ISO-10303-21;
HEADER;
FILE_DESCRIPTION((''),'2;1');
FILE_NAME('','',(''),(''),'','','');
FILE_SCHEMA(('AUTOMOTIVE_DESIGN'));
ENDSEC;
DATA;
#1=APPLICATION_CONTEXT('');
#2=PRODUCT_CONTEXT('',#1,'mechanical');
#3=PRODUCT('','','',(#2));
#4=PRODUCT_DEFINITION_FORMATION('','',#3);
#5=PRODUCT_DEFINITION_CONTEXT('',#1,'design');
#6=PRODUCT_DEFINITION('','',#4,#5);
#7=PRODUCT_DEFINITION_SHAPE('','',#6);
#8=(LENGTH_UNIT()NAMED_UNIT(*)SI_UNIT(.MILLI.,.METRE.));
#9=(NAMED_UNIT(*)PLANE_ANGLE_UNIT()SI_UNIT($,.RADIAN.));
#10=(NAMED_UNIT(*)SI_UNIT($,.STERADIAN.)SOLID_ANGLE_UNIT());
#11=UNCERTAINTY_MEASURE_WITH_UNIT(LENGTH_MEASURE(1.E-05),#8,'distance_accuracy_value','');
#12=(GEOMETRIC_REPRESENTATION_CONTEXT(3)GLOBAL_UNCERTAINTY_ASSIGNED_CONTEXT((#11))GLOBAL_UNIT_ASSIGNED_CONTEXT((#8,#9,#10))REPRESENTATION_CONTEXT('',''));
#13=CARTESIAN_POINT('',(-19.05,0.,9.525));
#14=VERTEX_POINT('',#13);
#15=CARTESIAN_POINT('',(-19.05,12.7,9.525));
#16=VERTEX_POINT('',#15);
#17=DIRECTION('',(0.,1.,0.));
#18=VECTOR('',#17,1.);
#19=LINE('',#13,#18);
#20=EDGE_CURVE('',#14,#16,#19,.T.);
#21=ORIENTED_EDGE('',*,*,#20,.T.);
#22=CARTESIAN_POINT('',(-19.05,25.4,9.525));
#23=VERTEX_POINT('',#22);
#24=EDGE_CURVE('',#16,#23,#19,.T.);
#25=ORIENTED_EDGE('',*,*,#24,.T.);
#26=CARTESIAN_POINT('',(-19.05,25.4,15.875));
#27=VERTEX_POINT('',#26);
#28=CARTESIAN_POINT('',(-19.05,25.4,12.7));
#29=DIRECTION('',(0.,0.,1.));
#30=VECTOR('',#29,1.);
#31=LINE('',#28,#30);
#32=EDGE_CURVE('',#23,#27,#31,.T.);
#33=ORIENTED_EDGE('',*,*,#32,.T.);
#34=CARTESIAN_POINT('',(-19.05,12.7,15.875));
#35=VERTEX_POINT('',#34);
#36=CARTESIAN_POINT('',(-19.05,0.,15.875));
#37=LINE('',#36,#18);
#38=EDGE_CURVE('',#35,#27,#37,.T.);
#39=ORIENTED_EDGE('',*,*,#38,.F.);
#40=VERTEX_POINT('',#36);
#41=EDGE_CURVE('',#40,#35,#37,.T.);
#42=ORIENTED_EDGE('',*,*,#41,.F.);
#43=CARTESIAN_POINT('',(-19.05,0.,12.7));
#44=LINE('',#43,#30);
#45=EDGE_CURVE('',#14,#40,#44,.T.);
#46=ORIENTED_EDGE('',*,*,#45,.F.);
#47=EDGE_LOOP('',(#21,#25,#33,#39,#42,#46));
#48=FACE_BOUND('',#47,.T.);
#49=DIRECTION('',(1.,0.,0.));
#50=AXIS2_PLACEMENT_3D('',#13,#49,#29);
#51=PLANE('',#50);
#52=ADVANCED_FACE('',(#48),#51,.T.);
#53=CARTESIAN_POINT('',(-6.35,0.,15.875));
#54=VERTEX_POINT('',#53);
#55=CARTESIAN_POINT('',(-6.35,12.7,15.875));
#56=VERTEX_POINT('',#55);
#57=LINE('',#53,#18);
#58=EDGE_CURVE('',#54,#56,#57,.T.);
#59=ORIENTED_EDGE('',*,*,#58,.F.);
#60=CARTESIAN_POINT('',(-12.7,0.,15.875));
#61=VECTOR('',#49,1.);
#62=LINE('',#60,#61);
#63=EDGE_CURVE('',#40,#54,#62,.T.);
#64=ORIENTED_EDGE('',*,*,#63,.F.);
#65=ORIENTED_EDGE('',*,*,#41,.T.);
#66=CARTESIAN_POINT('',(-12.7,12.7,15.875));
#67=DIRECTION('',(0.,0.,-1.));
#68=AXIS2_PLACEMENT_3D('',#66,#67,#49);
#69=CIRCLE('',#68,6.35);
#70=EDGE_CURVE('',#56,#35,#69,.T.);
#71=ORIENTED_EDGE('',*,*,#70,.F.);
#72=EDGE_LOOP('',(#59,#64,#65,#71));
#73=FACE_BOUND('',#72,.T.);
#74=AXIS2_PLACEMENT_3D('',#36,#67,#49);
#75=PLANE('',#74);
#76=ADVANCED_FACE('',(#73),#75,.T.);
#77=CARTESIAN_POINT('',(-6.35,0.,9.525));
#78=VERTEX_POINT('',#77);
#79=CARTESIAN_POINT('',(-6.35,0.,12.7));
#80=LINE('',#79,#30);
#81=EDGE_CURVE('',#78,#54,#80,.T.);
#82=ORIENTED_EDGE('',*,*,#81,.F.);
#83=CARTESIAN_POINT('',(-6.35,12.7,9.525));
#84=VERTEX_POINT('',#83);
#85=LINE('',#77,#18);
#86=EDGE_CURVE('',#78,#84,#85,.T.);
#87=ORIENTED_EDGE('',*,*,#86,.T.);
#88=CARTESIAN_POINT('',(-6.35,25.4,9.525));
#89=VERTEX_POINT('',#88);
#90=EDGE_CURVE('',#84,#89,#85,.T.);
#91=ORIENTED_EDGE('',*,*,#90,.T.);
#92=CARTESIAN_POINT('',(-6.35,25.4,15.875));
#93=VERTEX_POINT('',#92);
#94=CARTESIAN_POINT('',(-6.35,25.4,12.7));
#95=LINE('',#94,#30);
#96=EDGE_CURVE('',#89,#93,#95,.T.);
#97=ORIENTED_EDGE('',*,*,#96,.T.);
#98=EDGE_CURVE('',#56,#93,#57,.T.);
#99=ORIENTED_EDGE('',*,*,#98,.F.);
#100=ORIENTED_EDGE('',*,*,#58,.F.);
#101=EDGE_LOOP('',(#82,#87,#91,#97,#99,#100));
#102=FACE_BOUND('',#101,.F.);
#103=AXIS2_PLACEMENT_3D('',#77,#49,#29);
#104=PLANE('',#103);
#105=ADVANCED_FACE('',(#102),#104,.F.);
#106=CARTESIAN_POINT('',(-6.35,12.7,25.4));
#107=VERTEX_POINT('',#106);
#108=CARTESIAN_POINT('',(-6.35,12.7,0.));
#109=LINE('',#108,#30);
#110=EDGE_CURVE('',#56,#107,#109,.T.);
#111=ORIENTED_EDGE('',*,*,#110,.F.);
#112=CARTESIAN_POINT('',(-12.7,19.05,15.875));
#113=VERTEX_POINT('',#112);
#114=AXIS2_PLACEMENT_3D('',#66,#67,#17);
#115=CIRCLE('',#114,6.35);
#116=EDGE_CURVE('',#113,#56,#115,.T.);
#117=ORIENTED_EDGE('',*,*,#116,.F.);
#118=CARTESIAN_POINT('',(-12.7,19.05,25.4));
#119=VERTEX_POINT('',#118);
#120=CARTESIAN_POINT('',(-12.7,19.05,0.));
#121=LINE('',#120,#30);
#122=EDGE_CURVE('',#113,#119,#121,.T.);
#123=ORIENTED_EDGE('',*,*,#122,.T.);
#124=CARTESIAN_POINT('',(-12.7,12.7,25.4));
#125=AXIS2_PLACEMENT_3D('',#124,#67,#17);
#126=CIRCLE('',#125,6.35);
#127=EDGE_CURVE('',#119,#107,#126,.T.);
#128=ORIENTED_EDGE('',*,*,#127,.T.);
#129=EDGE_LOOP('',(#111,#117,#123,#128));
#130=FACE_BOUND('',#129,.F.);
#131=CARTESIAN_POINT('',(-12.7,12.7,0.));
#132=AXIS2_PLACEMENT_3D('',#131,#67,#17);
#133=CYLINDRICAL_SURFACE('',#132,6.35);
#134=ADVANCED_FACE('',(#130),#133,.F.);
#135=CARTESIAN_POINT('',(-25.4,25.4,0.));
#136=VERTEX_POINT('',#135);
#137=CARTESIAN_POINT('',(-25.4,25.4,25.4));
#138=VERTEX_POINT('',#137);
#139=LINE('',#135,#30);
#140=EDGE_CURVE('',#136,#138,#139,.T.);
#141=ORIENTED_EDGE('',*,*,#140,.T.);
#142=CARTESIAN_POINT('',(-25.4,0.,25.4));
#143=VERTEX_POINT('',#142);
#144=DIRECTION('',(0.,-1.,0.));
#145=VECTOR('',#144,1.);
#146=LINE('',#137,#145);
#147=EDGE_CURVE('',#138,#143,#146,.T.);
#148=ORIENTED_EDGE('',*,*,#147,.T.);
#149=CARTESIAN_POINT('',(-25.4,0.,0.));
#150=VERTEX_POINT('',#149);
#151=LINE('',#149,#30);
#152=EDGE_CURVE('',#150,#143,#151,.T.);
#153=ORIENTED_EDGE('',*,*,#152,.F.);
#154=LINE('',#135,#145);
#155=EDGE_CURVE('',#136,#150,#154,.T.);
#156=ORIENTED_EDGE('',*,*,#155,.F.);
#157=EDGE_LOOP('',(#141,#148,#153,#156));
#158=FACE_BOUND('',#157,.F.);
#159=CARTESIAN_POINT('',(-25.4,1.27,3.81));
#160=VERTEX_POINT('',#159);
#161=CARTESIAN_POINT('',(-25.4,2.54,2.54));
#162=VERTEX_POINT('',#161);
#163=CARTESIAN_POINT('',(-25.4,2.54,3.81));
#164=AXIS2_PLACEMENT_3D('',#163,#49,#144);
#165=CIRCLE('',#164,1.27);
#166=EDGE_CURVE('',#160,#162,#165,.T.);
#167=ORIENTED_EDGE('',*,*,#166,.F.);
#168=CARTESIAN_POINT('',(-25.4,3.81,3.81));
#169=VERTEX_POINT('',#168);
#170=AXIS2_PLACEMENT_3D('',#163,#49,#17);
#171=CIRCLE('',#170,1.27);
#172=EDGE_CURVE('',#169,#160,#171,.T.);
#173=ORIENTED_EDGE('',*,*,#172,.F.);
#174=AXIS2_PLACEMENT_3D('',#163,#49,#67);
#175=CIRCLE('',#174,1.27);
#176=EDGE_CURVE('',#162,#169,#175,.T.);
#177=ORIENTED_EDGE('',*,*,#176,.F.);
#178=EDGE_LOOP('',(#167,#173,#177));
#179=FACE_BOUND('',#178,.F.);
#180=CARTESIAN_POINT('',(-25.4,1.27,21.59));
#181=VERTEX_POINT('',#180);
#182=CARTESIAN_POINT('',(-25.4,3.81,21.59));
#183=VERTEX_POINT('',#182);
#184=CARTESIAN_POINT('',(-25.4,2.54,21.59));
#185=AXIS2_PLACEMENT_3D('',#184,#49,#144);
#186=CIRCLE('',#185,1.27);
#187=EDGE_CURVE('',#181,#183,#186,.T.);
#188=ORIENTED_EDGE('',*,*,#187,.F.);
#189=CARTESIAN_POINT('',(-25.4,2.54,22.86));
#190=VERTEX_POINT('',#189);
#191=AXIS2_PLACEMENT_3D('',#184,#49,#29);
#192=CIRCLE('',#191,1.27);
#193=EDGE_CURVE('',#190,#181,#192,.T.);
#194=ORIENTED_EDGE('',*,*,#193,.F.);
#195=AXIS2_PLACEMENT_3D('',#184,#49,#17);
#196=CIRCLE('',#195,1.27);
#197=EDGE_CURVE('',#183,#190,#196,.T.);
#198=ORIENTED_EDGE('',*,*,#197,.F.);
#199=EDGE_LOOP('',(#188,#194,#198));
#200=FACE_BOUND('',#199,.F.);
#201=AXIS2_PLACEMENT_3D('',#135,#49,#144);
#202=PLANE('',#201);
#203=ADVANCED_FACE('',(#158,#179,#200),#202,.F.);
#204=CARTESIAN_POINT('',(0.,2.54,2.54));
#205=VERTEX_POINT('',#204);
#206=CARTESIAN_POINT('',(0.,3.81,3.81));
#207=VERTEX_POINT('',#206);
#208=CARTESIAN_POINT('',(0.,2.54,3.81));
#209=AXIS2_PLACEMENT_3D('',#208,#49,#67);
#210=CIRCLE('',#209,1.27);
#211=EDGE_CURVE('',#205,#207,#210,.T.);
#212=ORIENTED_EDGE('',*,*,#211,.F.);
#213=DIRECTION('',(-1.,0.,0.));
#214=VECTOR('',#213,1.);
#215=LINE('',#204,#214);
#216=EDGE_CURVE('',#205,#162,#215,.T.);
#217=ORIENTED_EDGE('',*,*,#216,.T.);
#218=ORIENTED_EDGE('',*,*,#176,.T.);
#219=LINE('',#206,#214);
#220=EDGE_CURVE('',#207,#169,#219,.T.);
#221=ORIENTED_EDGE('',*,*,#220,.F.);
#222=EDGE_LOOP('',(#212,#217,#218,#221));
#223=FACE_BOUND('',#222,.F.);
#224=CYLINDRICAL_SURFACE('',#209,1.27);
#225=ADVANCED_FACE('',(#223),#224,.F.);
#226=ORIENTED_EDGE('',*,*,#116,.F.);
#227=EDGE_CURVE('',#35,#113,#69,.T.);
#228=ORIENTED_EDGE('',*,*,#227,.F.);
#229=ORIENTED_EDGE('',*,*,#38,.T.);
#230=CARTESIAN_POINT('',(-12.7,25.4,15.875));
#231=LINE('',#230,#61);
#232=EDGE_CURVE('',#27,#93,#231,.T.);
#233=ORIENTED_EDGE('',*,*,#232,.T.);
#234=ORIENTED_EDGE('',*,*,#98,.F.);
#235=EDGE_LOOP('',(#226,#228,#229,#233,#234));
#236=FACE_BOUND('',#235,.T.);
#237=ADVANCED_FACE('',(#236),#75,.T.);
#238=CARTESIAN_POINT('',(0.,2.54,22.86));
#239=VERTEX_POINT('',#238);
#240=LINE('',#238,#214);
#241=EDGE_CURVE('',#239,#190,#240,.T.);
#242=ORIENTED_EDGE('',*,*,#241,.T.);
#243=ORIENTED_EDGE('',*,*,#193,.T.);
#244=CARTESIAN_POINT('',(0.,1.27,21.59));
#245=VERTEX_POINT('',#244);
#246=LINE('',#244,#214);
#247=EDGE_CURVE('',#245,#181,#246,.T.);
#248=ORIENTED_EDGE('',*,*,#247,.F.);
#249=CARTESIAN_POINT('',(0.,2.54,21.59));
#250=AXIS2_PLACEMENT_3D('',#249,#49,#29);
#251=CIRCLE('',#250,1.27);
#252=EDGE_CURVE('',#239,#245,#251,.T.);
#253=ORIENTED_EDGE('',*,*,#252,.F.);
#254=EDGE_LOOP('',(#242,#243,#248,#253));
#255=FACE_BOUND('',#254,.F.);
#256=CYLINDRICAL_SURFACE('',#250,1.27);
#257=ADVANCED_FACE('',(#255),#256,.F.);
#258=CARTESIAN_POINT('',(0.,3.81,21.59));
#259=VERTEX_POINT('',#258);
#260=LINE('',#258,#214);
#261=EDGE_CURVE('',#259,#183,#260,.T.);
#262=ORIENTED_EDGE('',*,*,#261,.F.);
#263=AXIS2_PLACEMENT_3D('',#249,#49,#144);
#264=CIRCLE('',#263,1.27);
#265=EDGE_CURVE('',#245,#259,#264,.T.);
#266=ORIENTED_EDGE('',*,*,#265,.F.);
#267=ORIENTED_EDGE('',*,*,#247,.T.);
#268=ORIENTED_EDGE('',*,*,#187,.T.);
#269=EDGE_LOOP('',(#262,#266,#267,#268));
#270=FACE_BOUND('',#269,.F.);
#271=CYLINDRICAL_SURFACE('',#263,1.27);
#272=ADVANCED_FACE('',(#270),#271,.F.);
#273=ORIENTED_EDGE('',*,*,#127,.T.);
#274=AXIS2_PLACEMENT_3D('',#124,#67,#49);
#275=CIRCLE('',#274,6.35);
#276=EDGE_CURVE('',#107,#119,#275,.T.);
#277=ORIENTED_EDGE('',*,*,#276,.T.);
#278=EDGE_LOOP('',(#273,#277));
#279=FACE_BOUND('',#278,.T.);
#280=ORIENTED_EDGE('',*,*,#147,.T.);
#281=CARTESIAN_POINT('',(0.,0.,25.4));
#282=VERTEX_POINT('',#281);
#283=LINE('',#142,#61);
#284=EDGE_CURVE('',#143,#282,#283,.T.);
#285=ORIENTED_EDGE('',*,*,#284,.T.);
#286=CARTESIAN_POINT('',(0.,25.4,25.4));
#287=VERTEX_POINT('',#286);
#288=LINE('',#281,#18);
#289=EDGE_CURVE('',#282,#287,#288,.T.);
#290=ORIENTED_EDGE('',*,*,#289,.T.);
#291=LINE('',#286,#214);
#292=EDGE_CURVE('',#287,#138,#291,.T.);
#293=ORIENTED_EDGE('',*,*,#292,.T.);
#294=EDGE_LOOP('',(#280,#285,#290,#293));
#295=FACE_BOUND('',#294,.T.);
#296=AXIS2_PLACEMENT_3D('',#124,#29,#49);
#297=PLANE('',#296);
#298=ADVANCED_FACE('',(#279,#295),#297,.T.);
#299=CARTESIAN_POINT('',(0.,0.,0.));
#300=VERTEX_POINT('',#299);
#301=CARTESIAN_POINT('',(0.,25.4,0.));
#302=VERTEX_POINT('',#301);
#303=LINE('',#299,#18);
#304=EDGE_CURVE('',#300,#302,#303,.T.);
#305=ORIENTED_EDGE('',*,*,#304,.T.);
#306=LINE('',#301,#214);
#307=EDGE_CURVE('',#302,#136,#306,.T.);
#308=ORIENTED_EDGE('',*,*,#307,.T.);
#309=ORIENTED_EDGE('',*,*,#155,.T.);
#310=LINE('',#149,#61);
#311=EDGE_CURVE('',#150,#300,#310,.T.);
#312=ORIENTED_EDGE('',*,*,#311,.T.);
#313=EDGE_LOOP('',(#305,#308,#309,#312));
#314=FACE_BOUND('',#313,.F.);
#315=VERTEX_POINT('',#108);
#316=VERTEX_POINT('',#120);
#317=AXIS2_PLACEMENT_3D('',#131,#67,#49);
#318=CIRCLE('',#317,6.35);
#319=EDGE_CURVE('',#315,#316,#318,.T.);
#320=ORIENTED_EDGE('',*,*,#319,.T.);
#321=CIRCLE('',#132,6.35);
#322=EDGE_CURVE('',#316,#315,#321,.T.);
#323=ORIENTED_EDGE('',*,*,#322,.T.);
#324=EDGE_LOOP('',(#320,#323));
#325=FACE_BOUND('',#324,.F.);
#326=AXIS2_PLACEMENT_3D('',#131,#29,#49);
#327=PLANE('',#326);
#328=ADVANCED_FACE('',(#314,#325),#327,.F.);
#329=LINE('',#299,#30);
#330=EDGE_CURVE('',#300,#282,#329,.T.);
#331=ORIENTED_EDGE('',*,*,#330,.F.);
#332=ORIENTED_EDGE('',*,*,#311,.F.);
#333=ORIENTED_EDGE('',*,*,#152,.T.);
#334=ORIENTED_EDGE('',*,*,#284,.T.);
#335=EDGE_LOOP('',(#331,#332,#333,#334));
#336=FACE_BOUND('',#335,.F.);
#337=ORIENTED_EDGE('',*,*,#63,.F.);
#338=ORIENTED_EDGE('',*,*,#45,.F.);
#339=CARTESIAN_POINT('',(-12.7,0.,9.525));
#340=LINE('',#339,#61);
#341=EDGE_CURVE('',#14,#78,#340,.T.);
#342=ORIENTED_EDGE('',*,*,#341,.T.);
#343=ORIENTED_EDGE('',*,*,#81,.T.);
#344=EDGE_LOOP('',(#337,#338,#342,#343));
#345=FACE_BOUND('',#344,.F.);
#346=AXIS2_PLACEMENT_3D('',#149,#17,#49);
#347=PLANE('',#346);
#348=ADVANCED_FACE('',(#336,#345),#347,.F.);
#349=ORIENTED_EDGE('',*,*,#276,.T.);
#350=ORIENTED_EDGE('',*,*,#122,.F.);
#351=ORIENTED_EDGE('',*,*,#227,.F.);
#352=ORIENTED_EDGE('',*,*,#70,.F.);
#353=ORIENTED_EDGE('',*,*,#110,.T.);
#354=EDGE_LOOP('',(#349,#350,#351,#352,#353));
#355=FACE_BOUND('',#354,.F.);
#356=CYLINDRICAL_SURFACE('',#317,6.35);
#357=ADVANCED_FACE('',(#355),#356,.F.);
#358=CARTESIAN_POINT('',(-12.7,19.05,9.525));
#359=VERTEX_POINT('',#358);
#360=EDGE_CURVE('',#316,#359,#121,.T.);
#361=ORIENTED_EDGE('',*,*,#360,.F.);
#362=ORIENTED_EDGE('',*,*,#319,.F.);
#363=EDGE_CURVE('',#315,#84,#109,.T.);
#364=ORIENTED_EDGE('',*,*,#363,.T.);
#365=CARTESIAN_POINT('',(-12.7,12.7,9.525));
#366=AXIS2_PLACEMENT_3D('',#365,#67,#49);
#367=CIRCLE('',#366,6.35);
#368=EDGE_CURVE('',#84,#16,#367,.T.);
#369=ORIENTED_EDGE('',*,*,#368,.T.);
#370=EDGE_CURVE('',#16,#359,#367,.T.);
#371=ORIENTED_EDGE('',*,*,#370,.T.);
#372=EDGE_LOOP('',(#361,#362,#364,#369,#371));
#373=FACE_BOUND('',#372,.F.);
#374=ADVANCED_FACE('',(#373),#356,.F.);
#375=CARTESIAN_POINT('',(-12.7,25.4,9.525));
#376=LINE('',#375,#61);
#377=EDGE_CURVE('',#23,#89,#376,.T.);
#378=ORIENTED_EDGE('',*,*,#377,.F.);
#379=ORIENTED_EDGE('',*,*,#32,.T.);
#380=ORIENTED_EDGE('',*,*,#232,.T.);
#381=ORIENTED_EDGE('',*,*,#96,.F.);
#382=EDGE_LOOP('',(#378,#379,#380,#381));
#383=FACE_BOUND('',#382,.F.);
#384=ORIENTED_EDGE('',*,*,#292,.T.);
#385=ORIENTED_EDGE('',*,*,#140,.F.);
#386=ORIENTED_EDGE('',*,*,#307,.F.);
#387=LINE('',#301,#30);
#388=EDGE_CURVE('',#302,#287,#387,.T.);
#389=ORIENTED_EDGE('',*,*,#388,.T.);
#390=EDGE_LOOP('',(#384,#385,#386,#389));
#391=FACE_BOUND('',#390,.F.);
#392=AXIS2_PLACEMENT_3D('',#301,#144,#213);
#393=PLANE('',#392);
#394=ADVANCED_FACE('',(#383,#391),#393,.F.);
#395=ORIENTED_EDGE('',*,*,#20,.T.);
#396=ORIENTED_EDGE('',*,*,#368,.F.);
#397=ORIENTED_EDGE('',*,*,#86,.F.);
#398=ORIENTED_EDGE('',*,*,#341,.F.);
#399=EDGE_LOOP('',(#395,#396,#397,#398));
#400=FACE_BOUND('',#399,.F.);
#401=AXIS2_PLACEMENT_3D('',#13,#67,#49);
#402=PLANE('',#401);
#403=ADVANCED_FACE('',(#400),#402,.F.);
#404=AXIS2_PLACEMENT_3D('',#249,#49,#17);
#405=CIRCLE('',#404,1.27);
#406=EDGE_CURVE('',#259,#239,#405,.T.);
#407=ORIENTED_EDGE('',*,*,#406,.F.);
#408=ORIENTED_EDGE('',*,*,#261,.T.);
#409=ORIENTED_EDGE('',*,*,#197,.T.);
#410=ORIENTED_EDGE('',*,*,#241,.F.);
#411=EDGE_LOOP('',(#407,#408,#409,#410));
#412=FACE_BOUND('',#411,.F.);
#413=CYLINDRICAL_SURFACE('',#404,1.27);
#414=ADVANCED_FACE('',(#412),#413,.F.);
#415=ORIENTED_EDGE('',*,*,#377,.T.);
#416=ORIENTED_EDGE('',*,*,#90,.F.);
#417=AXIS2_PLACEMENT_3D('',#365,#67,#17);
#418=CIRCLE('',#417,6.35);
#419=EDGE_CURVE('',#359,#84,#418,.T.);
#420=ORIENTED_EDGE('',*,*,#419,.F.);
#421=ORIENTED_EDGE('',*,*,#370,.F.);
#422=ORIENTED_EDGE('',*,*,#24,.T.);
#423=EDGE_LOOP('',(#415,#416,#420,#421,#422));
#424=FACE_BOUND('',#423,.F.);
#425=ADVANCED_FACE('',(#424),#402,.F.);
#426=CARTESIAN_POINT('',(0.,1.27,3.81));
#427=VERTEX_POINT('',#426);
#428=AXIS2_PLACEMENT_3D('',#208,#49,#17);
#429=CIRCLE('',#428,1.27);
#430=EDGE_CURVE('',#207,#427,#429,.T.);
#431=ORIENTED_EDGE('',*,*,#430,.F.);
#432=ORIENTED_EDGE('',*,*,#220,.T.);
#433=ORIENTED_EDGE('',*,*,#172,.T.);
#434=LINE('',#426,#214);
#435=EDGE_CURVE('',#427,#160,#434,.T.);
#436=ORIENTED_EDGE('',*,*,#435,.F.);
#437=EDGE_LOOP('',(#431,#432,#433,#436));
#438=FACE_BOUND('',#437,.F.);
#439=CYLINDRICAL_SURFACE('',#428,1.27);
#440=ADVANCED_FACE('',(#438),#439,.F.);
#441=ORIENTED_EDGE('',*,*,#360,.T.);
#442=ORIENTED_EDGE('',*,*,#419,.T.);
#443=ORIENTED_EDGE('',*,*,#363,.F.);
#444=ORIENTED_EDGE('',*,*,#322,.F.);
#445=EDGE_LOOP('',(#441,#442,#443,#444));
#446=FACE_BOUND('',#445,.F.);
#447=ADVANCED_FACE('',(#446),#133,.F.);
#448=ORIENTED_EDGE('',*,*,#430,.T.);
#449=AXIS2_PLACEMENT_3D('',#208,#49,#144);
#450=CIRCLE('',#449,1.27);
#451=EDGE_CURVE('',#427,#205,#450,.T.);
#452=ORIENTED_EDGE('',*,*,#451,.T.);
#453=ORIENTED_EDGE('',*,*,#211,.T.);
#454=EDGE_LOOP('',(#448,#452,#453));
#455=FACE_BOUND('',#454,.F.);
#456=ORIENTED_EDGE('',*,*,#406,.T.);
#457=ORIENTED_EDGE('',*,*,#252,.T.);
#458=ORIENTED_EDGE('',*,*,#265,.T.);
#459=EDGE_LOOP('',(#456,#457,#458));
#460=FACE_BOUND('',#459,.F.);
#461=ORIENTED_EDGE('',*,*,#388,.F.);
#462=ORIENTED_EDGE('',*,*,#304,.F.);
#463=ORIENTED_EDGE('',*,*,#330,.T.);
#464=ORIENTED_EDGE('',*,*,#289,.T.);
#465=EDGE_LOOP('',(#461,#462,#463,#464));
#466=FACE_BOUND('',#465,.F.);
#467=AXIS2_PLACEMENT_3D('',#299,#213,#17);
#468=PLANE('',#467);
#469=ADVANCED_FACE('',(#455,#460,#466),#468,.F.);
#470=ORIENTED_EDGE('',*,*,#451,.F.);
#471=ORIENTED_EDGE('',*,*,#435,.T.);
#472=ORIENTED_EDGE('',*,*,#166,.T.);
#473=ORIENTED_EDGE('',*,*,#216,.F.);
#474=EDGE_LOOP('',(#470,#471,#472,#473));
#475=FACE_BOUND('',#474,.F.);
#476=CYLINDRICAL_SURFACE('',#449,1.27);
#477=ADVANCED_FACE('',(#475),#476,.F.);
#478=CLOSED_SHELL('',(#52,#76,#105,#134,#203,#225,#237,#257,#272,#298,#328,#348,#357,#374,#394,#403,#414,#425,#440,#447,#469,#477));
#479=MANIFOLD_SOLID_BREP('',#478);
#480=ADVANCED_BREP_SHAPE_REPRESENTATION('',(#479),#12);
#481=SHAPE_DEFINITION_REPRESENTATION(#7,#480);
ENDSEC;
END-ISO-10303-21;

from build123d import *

# Parameters (mm, degrees)
F1_DEPTH = 25.4
F2_W     = 12.7
F2_H     = 6.35
F3_DEPTH = 25.4
F5_DEPTH = 25.4


# Not quite as in the source:
# - a feature names something its author has since deleted; it is built from what else it names


with BuildPart() as f1:
    # F0 (on Top) → F1 (new body)
    with BuildSketch(Plane.XY):
        Polygon((-3.81, 0), (0, 0), (0, 2.54), (0, 25.4), (-12.7, 25.4), (-25.4, 25.4), (-25.4, 2.54), (-25.4, 0), (-21.59, 0), align=None)
        with BuildLine():
            ThreePointArc((-6.35, 12.7), (-17.1901280605, 8.2098719395), (-12.7, 19.05))
            ThreePointArc((-12.7, 19.05), (-8.2098719395, 17.1901280605), (-6.35, 12.7))
        make_face(mode=Mode.SUBTRACT)
    extrude(amount=F1_DEPTH)

    # F2 (on face) → F3 (cut)
    with BuildSketch(Plane.XZ):
        with Locations((-12.7, 12.7)):
            Rectangle(F2_W, F2_H)
    extrude(amount=-F3_DEPTH, mode=Mode.SUBTRACT)

    # F4 (on face) → F5 (cut)
    with BuildSketch(Plane.YZ):
        with BuildLine():
            ThreePointArc((3.81, 21.59), (3.4380256121, 22.4880256121), (2.54, 22.86))
            Line((2.54, 22.86), (2.54, 21.59))
            Line((2.54, 21.59), (1.27, 21.59))
            ThreePointArc((1.27, 21.59), (2.54, 20.32), (3.81, 21.59))
        make_face()
        with BuildLine():
            Line((2.54, 21.59), (2.54, 22.86))
            ThreePointArc((2.54, 22.86), (1.6419743879, 22.4880256121), (1.27, 21.59))
            Line((1.27, 21.59), (2.54, 21.59))
        make_face()
        with BuildLine():
            ThreePointArc((3.81, 3.81), (2.54, 5.08), (1.27, 3.81))
            Line((1.27, 3.81), (2.54, 3.81))
            Line((2.54, 3.81), (2.54, 2.54))
            ThreePointArc((2.54, 2.54), (3.4380256121, 2.9119743879), (3.81, 3.81))
        make_face()
        with BuildLine():
            Line((2.54, 3.81), (1.27, 3.81))
            ThreePointArc((1.27, 3.81), (1.6419743879, 2.9119743879), (2.54, 2.54))
            Line((2.54, 2.54), (2.54, 3.81))
        make_face()
    extrude(amount=-F5_DEPTH, mode=Mode.SUBTRACT)


solid = f1.part
